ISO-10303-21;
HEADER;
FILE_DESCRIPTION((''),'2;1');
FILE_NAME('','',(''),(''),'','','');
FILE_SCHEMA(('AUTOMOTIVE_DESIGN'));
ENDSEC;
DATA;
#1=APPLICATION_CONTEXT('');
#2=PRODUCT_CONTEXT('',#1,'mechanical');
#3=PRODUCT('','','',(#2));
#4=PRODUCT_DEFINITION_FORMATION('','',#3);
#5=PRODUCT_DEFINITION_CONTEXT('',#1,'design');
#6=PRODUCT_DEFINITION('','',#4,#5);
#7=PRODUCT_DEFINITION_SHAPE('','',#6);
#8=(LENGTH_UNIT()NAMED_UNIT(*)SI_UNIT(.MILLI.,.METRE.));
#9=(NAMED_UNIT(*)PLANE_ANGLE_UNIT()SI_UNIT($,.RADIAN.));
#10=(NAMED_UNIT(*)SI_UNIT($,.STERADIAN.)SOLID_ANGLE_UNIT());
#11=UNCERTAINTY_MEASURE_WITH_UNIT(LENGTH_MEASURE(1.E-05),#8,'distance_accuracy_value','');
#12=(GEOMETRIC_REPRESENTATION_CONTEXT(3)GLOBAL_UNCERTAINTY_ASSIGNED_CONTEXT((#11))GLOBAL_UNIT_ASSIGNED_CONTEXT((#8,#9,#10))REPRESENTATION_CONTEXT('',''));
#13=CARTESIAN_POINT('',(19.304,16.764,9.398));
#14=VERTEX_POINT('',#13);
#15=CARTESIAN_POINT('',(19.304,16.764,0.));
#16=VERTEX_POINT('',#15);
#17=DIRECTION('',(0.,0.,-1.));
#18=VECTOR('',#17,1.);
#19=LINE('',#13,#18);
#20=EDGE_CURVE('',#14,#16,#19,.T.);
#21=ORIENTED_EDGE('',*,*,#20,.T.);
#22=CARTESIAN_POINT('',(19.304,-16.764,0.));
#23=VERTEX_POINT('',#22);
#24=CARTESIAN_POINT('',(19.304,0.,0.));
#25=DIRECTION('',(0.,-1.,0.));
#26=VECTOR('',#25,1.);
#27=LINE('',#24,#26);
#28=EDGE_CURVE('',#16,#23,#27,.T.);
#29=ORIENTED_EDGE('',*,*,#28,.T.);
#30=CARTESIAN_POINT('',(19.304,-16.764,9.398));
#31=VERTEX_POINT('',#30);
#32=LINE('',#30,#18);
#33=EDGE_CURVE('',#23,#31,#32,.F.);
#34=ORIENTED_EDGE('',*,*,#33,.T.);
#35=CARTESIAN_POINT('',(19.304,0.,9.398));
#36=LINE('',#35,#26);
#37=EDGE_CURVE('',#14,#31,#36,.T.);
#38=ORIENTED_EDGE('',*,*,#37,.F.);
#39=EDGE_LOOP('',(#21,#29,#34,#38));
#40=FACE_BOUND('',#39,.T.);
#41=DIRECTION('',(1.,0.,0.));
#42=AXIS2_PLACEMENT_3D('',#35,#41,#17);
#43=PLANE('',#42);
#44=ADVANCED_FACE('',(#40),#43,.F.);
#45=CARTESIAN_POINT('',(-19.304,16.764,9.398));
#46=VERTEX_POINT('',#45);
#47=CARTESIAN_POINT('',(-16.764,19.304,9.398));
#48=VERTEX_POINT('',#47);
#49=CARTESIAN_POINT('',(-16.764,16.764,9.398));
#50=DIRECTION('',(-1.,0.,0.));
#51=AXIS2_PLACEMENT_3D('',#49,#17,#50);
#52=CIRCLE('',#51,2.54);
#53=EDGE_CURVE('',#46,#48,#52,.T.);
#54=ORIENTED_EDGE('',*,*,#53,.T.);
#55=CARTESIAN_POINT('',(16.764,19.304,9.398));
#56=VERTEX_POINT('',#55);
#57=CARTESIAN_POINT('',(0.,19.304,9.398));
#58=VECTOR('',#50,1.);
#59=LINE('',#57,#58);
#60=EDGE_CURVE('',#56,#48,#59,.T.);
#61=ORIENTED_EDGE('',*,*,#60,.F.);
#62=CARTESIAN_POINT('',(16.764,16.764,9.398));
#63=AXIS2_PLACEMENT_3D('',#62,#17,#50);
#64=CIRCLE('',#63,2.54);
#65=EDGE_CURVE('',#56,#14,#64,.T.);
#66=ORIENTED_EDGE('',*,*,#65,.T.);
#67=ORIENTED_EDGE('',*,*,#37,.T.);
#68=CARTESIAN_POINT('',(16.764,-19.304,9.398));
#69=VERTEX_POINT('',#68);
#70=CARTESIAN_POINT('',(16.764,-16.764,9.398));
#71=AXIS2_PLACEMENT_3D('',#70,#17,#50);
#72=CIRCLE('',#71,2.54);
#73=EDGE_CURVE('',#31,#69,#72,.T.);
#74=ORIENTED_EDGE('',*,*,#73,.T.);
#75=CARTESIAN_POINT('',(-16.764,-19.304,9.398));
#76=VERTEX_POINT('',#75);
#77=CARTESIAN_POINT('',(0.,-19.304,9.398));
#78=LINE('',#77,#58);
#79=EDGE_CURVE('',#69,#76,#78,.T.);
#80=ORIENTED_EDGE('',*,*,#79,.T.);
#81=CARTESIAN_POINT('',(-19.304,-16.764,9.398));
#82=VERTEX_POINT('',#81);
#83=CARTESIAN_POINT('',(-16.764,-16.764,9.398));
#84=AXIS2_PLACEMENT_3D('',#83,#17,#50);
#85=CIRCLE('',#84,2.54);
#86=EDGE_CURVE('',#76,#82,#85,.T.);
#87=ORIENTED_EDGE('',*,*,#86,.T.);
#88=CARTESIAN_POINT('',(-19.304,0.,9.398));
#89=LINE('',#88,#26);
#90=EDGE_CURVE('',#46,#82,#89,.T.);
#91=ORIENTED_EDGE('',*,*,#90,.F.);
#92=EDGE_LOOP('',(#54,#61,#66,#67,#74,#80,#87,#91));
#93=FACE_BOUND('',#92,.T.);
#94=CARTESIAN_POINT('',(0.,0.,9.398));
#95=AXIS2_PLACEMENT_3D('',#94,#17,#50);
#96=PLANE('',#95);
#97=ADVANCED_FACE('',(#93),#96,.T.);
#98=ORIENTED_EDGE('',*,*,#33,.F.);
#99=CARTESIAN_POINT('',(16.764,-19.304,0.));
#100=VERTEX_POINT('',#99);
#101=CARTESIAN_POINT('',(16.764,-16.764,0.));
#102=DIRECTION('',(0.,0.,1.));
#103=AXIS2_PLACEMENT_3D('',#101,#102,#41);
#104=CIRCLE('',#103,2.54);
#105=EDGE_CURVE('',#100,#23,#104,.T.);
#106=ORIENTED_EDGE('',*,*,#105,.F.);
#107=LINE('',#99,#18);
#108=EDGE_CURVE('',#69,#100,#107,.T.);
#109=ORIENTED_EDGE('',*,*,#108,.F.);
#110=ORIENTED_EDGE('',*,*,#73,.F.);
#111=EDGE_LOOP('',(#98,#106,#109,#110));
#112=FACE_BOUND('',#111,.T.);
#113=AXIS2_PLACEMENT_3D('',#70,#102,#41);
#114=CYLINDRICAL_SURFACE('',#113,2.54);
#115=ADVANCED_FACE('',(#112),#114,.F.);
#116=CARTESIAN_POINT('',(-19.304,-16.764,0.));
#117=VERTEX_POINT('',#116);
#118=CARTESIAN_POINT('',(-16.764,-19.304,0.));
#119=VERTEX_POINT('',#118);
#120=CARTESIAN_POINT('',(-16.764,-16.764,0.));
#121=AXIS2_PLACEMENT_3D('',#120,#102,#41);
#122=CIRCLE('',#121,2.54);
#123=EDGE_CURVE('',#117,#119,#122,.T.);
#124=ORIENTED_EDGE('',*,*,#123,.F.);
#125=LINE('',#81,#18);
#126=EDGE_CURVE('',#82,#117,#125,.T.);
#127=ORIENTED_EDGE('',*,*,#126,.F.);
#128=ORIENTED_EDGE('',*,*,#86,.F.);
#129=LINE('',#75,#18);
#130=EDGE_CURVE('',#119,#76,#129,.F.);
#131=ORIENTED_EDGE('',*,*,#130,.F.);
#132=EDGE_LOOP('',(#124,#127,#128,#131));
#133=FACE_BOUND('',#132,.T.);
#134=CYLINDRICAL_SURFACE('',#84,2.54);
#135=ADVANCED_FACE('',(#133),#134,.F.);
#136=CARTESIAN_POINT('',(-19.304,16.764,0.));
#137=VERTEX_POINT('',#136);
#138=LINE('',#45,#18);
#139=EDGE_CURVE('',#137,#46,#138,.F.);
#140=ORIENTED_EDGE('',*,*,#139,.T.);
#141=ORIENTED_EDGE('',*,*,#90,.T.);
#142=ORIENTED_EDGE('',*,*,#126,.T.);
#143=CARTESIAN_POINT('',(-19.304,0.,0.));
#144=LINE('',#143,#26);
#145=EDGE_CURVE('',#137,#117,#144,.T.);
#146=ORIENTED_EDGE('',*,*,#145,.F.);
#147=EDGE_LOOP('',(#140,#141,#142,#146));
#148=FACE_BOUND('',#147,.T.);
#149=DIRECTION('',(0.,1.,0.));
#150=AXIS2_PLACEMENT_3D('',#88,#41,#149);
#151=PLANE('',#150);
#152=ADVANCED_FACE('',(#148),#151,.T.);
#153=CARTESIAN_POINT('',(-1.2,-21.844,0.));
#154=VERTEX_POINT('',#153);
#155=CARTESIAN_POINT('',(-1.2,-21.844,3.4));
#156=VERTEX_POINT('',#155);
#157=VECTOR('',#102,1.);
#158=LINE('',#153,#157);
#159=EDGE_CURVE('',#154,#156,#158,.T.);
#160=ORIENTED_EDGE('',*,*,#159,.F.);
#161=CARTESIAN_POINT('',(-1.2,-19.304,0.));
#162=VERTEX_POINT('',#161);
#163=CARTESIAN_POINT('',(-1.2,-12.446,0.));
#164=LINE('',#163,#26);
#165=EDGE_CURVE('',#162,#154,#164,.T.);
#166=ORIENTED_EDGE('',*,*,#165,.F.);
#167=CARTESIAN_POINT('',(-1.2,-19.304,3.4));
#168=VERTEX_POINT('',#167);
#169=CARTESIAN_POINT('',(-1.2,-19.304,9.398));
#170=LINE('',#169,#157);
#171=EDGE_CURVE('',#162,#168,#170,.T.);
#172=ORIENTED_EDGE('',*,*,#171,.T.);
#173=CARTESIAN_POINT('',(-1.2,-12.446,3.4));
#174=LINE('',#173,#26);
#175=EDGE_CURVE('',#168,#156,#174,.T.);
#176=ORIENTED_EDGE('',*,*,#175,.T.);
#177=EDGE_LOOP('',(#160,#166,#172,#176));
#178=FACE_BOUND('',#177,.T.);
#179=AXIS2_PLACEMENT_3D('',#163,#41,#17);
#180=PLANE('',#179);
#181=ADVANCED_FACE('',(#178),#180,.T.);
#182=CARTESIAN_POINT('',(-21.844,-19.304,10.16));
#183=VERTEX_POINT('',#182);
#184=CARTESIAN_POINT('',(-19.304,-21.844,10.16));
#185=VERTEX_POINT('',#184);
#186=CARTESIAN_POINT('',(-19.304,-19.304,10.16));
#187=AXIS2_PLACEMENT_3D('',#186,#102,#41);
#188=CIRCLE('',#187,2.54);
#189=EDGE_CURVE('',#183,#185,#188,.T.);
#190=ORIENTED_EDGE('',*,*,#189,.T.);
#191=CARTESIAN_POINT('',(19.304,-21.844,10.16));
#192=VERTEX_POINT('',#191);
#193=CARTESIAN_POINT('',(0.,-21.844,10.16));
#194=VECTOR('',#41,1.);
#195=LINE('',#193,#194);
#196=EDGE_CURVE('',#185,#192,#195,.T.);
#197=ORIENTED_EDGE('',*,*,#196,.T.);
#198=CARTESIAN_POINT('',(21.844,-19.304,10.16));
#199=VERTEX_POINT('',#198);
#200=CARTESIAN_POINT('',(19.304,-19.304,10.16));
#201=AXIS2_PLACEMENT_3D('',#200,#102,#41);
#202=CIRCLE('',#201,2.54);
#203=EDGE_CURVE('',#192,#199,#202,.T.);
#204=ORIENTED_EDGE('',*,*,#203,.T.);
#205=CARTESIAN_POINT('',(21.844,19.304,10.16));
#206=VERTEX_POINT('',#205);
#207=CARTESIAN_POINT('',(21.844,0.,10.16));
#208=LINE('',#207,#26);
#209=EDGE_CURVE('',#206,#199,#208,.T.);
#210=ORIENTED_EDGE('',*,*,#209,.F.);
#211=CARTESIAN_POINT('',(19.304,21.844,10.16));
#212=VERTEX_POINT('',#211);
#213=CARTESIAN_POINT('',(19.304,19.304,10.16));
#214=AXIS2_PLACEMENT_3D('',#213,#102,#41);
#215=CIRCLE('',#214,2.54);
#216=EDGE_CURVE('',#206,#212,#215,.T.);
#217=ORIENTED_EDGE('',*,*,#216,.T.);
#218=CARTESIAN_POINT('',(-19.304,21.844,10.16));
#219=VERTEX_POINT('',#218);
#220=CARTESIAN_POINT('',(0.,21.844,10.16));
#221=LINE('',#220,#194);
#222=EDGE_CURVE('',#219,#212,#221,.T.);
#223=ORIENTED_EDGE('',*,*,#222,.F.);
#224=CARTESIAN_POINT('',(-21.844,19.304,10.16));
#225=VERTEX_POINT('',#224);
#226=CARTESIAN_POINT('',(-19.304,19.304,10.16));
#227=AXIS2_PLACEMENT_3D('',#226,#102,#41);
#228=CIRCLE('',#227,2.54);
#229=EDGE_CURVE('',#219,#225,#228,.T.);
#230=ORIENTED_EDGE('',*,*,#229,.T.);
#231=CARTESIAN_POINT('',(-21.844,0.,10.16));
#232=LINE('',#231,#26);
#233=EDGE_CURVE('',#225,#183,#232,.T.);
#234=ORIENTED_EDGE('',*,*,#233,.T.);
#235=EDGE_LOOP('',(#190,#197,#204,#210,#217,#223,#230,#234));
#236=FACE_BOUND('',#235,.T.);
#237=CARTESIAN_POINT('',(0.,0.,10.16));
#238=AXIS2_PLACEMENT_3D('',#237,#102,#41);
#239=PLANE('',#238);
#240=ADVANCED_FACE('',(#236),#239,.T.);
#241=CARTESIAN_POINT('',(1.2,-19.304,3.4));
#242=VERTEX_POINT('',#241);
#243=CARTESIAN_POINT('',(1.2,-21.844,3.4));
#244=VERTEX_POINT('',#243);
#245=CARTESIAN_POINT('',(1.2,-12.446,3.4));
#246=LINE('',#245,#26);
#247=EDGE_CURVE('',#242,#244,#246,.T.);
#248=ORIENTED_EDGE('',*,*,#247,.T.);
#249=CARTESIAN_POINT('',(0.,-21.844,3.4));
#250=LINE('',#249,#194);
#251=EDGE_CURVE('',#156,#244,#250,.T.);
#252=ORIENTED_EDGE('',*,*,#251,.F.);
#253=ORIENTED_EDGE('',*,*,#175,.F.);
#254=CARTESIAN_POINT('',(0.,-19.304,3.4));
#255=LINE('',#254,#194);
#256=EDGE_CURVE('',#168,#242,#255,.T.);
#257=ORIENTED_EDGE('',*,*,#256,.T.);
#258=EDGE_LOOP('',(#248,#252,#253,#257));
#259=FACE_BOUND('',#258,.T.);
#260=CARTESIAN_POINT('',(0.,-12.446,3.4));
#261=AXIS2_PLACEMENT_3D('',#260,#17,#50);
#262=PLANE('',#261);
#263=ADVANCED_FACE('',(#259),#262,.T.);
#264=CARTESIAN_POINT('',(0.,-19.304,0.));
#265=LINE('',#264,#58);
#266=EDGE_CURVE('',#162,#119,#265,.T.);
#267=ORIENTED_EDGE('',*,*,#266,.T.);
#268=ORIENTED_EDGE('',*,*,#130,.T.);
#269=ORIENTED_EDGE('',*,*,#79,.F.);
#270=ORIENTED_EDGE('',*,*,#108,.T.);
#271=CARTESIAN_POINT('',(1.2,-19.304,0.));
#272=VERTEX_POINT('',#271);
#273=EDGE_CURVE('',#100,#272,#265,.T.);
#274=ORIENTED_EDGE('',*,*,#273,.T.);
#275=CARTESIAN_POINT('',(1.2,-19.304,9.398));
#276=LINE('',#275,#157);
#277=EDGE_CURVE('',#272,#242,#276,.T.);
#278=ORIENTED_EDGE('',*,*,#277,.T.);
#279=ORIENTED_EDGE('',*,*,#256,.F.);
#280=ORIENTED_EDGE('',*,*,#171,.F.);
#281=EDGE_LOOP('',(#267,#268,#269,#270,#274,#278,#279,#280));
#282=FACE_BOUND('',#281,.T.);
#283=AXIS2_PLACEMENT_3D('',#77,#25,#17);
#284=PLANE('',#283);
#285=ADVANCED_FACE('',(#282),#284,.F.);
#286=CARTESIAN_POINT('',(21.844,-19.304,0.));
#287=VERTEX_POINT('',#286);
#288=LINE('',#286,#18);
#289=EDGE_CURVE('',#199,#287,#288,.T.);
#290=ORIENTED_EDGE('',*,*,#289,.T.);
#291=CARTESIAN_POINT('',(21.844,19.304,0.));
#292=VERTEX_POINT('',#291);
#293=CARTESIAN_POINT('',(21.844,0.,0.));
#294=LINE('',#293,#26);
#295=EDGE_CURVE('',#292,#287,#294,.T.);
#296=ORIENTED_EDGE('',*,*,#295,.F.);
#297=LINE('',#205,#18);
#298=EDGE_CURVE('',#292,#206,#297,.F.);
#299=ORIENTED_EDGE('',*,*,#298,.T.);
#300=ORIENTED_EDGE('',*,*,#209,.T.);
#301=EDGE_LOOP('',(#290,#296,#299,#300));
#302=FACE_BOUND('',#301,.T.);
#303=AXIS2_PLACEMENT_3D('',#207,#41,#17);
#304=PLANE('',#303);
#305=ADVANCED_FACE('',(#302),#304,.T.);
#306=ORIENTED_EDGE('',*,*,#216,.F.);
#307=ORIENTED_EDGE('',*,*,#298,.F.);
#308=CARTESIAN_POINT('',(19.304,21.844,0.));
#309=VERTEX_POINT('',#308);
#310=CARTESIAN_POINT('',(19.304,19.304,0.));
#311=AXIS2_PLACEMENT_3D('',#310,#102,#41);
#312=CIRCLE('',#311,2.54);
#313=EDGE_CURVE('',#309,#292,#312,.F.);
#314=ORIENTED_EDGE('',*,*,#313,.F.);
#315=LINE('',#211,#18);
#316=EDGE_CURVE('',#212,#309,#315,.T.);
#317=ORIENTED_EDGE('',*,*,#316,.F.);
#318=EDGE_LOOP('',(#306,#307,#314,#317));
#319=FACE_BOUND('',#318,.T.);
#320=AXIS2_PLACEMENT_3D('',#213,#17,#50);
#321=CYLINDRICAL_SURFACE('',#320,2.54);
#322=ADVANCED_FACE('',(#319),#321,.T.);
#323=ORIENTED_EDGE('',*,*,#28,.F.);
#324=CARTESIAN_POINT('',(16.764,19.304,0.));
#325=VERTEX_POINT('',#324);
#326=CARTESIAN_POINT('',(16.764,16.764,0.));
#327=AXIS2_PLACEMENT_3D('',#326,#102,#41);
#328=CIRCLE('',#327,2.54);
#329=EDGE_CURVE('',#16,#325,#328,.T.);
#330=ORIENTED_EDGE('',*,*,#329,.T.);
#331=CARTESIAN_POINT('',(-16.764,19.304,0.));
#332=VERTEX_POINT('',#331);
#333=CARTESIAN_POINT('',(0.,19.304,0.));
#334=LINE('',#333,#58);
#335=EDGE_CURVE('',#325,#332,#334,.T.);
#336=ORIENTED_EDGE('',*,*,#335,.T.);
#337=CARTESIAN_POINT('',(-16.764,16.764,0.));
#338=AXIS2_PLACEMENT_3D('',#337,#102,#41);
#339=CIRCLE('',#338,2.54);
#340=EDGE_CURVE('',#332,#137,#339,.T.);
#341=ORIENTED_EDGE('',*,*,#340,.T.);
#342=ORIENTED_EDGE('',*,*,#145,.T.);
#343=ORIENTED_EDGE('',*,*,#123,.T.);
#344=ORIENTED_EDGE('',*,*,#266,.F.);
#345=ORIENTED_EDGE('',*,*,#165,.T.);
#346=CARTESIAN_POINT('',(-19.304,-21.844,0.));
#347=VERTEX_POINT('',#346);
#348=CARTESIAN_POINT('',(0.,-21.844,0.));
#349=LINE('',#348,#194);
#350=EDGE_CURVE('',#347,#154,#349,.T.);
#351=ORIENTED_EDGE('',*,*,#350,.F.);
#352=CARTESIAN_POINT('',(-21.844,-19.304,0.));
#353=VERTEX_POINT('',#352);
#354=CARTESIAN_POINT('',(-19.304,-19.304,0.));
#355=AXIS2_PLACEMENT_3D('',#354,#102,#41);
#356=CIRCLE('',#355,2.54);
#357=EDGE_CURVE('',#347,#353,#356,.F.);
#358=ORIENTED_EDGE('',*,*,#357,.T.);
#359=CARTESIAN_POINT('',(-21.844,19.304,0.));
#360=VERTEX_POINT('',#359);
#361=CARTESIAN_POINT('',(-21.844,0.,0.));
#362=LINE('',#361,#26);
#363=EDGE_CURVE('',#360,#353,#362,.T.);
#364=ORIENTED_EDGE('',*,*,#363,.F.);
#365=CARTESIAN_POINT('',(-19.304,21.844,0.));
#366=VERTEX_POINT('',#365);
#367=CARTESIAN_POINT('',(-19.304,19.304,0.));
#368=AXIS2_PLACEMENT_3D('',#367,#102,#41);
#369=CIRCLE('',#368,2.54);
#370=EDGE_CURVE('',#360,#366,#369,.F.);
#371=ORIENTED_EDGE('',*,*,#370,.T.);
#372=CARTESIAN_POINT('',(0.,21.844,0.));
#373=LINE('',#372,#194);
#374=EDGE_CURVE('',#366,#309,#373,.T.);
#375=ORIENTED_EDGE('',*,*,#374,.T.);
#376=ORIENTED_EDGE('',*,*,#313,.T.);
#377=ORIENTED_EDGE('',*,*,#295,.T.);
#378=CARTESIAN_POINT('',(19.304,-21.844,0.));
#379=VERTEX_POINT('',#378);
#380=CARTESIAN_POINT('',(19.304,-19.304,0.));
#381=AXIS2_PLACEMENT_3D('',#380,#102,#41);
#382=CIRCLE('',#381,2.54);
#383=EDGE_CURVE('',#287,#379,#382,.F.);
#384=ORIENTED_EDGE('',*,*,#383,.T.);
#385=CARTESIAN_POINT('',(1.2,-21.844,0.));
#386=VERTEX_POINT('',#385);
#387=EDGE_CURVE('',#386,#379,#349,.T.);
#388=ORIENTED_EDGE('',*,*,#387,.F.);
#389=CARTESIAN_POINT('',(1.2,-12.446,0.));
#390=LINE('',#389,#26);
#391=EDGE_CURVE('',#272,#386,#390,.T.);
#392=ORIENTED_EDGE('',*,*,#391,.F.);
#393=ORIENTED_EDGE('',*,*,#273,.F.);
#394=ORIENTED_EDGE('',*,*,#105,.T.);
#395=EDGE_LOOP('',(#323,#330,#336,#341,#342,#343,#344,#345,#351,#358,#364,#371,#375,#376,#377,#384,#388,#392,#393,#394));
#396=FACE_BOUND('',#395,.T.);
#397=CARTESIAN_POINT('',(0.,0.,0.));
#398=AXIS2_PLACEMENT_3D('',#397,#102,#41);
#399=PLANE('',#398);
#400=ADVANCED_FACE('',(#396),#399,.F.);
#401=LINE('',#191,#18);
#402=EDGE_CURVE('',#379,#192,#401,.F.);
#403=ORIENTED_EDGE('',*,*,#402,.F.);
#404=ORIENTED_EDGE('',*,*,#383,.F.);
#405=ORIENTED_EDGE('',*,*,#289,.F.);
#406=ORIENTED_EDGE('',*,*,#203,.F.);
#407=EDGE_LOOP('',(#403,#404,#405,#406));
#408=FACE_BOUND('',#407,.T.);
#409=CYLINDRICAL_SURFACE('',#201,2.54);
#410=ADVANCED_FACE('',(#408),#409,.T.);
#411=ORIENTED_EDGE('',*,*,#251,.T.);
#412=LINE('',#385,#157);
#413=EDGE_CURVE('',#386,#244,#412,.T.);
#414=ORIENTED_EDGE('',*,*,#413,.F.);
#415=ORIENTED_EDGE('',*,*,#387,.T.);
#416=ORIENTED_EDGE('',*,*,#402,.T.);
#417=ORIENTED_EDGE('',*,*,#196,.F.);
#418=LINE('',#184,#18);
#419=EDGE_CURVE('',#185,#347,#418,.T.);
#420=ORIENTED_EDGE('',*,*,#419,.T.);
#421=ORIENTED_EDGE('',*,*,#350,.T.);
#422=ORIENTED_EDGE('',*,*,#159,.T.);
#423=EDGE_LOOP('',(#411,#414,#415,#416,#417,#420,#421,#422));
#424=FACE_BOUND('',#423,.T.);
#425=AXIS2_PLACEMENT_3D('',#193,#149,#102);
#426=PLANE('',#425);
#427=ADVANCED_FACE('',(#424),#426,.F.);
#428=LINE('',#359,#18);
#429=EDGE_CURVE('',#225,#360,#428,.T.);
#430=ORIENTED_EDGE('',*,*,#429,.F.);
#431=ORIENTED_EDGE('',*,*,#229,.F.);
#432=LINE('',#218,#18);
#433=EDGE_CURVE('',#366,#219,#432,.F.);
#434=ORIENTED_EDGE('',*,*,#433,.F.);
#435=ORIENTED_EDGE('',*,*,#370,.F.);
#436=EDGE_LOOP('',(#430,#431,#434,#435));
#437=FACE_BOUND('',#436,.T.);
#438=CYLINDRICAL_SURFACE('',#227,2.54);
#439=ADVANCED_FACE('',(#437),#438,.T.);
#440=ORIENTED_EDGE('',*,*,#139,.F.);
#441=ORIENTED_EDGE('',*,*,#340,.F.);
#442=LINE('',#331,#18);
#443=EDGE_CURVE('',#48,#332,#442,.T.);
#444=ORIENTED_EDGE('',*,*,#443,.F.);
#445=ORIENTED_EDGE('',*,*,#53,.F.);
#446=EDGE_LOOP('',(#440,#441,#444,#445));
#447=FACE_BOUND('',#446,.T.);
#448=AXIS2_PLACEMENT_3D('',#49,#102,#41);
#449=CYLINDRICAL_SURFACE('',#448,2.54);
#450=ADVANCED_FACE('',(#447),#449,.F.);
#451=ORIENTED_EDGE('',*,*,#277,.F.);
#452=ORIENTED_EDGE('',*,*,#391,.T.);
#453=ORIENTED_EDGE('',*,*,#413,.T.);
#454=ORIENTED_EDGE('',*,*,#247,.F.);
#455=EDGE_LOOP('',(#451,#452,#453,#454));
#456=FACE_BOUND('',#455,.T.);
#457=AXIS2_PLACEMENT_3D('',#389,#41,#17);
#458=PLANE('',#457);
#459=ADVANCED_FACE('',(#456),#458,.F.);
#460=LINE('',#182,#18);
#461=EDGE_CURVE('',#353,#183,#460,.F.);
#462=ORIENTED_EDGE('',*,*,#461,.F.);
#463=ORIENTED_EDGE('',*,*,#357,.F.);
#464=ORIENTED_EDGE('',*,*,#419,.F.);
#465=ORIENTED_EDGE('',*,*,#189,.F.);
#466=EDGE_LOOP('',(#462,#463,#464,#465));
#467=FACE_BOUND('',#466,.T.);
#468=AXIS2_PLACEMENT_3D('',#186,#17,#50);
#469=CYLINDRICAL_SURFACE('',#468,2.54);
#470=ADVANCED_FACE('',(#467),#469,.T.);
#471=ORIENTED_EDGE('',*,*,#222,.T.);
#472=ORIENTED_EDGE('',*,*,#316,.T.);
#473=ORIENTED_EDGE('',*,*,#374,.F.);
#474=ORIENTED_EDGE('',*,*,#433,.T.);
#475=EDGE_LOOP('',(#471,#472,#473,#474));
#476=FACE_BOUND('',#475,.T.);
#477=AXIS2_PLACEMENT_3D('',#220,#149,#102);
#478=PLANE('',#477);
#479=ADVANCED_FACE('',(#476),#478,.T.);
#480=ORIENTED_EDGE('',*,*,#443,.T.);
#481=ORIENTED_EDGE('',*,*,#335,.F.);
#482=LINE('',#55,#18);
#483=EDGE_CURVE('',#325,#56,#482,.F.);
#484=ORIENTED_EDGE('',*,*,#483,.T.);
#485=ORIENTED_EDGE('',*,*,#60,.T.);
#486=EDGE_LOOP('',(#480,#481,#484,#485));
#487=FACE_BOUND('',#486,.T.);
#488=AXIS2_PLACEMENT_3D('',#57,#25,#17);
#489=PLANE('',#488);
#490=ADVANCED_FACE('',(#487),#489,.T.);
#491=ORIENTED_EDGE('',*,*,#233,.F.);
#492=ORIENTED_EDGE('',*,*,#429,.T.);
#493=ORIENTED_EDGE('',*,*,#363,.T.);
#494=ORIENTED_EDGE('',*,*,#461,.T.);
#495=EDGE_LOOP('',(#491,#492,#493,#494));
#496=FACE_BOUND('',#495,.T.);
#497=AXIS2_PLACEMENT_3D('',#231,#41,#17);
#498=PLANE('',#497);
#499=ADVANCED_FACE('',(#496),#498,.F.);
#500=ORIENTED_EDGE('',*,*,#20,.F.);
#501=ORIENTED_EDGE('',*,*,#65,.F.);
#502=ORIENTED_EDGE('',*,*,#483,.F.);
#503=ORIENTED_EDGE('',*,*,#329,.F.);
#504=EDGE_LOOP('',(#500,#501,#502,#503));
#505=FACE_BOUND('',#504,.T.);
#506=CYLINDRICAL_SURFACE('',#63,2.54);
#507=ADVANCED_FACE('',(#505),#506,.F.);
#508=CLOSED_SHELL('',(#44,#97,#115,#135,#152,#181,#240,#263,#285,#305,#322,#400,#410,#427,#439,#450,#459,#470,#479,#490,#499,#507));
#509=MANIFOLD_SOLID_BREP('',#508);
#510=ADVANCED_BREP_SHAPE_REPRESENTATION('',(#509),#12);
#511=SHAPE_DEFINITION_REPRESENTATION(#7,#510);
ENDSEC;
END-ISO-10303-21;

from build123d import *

# Parameters (mm, degrees)
BOSS_EXTRUDE1_OUTLINE_W = 43.688
BOSS_EXTRUDE1_OUTLINE_H = 43.688
BOSS_EXTRUDE1_DEPTH     = 10.16
CUT_EXTRUDE2_DEPTH      = 9.398
SKETCH3_W               = 2.4
SKETCH3_H               = 3.4
CUT_EXTRUDE3_DEPTH      = 9.398
FILLET1_R               = 2.54
FILLET2_R               = 2.54


# Read off the part's stored shape, not the designer's step: Boss-Extrude1
with BuildPart() as part:
    # Boss-Extrude1 outline → Boss-Extrude1 (new body)
    with BuildSketch(Plane.XY):
        Rectangle(BOSS_EXTRUDE1_OUTLINE_W, BOSS_EXTRUDE1_OUTLINE_H)
    extrude(amount=BOSS_EXTRUDE1_DEPTH)

    # Sketch4 → Cut-Extrude2 (cut)
    with BuildSketch(Plane(origin=(0, 0, 0), x_dir=(-1, 0, 0), z_dir=(0, 0, -1))):
        Polygon((-19.304, 19.304), (0, 0), (19.304, 19.304), align=None)
        Polygon((-19.304, 19.304), (-19.304, -19.304), (0, 0), align=None)
        Polygon((19.304, 19.304), (0, 0), (19.304, -19.304), align=None)
        Polygon((0, 0), (-19.304, -19.304), (19.304, -19.304), align=None)
    extrude(amount=-CUT_EXTRUDE2_DEPTH, mode=Mode.SUBTRACT)

    # Sketch3 → Cut-Extrude3 (cut)
    with BuildSketch(Plane.XZ.offset(21.844)):
        with Locations((0, 1.7)):
            Rectangle(SKETCH3_W, SKETCH3_H)
    extrude(amount=-CUT_EXTRUDE3_DEPTH, mode=Mode.SUBTRACT)

    # Fillet1
    fillet1_edges = [part.edges().sort_by_distance(p)[0] for p in [
        (21.844, -21.844, 5.08),
        (-21.844, -21.844, 5.08),
        (-21.844, 21.844, 5.08),
        (21.844, 21.844, 5.08),
    ]]
    fillet(fillet1_edges, radius=FILLET1_R)

    # Fillet2
    fillet2_edges = [part.edges().sort_by_distance(p)[0] for p in [
        (19.304, 19.304, 4.699),
        (-19.304, 19.304, 4.699),
        (-19.304, -19.304, 4.699),
        (19.304, -19.304, 4.699),
    ]]
    fillet(fillet2_edges, radius=FILLET2_R)


solid = part.part
